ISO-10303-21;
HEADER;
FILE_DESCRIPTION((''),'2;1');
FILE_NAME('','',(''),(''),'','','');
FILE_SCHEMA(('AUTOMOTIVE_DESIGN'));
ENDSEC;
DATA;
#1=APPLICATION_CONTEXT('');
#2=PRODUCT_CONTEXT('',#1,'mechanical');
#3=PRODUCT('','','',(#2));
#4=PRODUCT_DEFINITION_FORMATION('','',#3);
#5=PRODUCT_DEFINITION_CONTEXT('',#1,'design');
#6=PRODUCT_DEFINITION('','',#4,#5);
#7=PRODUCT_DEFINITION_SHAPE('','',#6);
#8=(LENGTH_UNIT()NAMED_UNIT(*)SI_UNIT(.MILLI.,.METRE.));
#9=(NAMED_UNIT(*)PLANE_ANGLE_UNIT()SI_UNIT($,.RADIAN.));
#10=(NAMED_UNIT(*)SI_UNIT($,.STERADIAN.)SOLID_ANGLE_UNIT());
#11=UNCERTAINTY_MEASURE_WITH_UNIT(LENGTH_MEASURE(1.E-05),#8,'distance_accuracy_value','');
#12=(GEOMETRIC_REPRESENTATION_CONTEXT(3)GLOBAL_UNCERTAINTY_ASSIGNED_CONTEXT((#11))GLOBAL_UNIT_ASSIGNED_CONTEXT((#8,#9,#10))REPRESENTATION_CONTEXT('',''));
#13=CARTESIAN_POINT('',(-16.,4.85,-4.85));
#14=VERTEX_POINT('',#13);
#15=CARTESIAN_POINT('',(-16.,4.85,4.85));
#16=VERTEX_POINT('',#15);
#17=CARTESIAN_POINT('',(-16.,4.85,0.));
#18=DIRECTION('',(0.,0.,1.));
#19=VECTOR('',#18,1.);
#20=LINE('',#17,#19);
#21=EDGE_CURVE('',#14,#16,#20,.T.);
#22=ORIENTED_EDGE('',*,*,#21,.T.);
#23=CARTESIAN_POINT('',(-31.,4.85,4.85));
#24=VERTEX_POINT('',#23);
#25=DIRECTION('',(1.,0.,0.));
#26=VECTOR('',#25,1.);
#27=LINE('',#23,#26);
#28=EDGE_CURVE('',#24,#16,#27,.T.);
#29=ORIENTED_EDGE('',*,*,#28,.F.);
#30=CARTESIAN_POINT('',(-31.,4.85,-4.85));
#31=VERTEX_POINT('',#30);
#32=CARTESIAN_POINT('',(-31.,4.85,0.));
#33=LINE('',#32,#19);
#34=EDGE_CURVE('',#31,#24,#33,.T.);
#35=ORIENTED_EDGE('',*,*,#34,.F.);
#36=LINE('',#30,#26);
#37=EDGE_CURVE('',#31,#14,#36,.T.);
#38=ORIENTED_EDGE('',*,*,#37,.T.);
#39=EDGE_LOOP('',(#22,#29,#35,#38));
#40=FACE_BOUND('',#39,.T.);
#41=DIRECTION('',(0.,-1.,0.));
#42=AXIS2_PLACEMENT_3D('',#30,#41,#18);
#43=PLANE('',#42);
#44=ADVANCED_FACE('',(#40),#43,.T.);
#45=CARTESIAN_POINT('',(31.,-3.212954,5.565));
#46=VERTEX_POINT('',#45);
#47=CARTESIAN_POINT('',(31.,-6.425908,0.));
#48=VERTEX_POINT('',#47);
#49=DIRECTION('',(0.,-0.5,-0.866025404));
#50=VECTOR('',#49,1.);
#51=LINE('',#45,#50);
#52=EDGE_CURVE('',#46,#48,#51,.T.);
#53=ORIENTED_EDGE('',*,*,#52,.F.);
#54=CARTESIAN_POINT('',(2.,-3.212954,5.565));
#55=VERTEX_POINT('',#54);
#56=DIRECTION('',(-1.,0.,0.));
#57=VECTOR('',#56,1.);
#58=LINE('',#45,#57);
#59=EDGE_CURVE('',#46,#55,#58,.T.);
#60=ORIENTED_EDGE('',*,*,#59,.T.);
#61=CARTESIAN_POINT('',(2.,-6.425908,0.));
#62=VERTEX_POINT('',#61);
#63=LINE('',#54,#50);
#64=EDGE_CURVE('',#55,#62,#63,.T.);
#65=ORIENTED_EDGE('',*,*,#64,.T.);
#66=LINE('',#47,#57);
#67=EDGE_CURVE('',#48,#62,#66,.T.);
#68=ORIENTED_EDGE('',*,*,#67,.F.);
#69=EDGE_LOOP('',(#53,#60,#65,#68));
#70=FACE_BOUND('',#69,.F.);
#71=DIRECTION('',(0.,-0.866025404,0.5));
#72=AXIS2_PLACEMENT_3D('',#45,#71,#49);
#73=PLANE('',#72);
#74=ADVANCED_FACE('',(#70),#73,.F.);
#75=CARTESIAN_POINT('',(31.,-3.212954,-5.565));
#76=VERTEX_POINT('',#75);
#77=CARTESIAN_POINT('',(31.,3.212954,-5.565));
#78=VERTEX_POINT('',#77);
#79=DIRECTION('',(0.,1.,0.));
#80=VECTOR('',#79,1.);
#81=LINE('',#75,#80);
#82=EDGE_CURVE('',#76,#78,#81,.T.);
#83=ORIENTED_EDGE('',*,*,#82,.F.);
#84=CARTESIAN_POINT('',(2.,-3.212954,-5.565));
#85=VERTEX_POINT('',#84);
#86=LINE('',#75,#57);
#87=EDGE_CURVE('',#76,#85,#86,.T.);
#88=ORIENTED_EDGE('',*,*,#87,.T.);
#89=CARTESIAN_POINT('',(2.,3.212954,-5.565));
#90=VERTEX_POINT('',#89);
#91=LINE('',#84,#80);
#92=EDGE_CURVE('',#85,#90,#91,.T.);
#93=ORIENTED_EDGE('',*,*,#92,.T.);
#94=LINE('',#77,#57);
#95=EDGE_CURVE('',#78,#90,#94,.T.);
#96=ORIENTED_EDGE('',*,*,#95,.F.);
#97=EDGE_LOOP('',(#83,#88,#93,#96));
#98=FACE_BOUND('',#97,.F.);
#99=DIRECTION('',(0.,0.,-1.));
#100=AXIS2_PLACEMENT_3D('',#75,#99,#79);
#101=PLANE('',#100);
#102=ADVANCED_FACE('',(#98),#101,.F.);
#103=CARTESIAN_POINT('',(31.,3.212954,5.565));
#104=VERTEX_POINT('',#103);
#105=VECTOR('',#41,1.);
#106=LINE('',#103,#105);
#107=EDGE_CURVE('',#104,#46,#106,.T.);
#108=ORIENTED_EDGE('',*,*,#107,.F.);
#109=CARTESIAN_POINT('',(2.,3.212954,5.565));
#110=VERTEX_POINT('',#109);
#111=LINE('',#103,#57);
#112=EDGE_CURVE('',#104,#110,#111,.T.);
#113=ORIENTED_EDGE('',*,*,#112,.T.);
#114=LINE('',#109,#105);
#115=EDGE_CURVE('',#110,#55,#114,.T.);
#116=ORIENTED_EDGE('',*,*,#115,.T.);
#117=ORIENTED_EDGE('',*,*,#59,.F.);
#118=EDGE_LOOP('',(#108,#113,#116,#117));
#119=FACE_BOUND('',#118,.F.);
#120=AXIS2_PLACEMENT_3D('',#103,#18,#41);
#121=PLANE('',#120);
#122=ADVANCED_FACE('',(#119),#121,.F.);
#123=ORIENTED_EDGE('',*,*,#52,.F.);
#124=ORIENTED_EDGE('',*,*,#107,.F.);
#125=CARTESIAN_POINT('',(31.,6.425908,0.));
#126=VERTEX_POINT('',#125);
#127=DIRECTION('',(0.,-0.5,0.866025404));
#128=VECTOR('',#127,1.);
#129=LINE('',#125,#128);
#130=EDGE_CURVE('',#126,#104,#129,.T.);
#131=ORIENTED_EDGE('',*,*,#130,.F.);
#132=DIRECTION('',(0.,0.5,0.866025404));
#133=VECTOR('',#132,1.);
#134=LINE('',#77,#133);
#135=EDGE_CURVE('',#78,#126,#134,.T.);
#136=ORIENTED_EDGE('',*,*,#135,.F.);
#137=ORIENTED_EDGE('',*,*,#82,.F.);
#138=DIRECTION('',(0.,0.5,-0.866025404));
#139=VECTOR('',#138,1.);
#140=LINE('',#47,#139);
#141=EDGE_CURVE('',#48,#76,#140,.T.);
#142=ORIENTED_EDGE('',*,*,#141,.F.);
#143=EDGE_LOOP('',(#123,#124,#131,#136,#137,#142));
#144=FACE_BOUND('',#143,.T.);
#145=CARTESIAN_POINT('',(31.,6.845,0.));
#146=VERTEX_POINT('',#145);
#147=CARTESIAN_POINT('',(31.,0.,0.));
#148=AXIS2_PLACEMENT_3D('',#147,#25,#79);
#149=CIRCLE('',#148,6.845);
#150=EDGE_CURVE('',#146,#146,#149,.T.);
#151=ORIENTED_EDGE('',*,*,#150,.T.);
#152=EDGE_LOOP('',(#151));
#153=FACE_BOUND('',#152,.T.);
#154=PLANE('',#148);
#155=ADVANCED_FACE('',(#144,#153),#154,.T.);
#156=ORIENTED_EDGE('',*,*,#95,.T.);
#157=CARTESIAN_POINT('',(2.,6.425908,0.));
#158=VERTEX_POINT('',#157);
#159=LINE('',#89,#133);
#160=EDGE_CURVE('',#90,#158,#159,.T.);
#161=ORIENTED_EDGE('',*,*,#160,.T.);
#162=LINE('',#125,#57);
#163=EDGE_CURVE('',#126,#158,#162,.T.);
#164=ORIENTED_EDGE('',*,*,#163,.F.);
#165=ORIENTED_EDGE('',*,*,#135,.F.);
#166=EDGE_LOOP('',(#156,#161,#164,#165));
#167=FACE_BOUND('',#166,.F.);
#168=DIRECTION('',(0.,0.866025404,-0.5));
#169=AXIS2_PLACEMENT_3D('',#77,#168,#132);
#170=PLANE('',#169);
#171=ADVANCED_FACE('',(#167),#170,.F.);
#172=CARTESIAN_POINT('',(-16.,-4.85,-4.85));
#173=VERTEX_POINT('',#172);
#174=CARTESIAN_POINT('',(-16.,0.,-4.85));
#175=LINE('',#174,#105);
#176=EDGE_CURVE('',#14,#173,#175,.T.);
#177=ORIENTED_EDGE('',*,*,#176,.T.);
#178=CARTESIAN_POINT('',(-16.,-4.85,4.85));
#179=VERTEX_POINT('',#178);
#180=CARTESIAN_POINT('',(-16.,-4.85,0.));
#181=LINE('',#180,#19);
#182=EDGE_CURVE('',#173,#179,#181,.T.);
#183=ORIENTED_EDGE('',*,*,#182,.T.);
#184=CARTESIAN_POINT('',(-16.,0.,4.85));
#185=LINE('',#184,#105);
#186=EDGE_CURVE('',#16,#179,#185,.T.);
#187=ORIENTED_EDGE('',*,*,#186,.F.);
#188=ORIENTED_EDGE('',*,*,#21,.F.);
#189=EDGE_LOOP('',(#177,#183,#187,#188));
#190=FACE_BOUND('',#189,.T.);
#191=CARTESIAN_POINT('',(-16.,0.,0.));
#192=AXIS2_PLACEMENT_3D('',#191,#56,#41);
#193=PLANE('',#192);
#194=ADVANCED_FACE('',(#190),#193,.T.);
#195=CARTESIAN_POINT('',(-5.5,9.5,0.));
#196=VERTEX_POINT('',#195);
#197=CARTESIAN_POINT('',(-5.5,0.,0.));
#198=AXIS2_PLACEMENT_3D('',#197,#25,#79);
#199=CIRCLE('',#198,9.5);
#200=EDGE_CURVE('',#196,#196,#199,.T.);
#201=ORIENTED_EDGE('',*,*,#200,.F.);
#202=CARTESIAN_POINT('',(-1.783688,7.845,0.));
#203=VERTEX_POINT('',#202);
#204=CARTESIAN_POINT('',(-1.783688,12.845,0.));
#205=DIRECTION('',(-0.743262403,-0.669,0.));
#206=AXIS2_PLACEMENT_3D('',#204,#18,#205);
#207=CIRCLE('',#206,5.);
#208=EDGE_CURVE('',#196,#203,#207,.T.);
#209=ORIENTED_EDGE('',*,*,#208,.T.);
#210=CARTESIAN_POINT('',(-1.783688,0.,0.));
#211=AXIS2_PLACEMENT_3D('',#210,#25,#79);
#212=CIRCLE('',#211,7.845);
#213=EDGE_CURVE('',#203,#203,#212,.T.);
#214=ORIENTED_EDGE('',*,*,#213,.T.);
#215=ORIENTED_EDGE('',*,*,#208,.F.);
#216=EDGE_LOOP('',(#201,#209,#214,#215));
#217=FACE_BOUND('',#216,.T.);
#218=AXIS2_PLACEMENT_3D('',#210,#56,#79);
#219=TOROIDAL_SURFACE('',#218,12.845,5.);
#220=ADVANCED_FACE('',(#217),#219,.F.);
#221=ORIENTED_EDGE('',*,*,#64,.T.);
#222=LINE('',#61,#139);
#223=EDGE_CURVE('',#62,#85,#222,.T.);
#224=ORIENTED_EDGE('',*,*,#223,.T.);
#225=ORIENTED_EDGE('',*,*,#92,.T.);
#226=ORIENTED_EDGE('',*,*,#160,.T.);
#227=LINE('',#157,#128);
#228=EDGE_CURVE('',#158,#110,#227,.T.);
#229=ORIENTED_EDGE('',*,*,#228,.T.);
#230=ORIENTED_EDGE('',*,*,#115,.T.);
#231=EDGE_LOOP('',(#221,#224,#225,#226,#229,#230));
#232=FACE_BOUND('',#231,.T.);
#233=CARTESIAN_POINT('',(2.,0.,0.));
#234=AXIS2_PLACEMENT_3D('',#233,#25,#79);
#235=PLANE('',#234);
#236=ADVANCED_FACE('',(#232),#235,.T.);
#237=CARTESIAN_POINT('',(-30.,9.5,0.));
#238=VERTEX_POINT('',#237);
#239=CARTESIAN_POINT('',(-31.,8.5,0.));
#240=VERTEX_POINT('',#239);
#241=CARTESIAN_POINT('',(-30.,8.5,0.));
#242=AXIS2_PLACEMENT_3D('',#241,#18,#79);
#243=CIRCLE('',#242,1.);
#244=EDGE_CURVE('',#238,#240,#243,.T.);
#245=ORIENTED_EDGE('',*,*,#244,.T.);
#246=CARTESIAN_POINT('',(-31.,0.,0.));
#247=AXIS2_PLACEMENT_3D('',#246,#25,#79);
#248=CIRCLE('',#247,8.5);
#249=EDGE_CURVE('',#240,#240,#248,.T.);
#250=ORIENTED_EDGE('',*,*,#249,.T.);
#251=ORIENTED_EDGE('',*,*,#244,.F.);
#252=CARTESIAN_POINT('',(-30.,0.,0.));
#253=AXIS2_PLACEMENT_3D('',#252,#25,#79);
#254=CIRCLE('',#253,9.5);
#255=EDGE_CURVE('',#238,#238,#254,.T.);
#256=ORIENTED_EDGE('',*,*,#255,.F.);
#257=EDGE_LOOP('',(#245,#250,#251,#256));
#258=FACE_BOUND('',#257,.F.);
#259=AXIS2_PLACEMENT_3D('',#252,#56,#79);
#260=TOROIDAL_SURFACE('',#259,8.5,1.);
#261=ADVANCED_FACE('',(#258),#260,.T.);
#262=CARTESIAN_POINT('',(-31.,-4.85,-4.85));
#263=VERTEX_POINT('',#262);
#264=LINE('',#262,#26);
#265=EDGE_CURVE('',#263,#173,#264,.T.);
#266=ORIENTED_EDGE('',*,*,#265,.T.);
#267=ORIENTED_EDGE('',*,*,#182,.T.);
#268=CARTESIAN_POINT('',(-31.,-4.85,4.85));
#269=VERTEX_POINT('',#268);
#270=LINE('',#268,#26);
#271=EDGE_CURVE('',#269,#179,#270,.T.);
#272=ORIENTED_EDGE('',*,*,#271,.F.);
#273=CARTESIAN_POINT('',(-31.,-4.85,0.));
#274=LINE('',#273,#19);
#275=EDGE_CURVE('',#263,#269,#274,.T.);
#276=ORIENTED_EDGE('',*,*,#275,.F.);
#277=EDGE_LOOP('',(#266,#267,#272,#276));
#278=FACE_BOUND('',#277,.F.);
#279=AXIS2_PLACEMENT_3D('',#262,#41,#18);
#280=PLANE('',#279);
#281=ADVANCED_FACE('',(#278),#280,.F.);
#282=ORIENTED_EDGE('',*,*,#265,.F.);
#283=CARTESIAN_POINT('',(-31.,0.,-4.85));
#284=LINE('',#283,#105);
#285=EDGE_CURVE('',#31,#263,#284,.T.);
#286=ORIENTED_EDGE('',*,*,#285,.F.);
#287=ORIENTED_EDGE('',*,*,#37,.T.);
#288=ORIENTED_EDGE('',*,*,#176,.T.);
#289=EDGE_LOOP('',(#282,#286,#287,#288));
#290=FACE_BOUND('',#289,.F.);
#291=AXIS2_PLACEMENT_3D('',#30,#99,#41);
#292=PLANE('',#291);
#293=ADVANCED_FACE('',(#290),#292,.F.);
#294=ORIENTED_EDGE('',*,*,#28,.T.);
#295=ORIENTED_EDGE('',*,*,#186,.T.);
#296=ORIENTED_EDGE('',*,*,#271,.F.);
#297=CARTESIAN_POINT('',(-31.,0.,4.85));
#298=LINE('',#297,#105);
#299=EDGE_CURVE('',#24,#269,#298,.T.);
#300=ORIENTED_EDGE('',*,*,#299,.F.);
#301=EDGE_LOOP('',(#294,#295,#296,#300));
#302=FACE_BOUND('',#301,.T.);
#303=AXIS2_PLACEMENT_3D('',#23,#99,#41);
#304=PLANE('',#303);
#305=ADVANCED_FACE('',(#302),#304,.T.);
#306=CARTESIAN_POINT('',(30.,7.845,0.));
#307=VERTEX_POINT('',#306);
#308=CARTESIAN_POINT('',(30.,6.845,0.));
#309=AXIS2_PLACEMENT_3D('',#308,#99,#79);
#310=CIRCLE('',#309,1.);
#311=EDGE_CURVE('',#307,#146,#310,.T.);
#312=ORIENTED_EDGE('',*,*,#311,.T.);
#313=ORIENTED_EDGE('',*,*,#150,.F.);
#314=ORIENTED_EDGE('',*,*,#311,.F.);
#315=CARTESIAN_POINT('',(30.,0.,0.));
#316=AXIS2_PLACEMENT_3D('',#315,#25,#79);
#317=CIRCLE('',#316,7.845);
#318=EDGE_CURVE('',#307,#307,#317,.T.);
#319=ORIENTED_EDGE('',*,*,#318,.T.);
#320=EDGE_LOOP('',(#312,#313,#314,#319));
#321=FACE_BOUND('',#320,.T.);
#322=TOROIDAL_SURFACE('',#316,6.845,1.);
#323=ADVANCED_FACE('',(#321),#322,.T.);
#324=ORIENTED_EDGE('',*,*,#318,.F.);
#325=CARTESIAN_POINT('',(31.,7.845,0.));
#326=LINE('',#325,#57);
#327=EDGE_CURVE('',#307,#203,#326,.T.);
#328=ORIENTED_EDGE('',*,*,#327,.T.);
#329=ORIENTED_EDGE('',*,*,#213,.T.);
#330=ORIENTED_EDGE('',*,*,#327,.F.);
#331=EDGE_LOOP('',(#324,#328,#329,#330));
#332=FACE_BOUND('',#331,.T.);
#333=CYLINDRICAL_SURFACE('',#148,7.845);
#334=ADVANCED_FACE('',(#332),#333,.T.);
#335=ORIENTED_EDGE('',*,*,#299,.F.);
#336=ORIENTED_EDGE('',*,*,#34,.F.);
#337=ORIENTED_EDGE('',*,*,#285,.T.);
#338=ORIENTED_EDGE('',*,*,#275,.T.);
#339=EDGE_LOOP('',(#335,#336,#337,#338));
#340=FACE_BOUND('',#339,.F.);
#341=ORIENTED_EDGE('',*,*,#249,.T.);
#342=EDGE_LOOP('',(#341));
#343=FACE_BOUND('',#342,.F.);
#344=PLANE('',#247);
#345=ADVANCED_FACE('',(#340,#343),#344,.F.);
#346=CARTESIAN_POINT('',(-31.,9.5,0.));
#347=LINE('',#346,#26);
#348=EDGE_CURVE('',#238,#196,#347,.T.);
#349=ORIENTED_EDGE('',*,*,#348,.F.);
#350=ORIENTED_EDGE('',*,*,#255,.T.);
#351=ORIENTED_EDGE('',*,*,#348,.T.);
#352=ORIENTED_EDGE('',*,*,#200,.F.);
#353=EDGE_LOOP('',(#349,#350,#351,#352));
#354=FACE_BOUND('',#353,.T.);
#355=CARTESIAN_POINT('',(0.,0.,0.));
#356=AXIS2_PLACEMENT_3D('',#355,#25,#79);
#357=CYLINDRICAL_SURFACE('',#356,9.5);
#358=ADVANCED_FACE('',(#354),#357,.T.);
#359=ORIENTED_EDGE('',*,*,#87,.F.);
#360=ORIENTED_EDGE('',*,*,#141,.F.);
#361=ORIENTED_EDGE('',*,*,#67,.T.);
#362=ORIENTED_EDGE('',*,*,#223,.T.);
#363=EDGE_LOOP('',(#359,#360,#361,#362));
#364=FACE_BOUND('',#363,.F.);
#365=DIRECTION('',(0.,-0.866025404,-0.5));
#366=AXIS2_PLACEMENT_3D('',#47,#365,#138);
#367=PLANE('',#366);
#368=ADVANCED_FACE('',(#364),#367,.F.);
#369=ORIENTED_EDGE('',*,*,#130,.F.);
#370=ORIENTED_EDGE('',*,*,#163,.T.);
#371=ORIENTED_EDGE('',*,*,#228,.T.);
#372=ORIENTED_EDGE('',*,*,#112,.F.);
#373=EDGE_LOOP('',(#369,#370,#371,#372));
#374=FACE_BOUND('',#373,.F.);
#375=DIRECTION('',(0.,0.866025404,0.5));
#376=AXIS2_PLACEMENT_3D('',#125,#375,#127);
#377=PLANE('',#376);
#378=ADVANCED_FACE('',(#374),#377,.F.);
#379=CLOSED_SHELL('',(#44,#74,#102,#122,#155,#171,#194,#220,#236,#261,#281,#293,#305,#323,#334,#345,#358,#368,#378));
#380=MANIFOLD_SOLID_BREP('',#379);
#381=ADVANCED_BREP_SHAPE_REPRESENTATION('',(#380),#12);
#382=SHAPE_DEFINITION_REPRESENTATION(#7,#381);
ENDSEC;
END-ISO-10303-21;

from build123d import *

# Parameters (mm, degrees)
F0_R     = 9.5
F1_DEPTH = 31
F2_R     = 9.5
F2_R_2   = 7.845
F3_DEPTH = 36.5
F5_R     = 1
F7_DEPTH = 29
F8_W     = 9.7
F8_H     = 9.7
F9_DEPTH = 15


# Not quite as in the source:
# - a fillet or chamfer that OpenCascade refuses, or shapes differently, is made with other operations: its cross-section is extruded or revolved along the edge and cut away or added


with BuildPart() as f1:
    # F0 (on Right) → F1 (new body, symmetric)
    with BuildSketch(Plane.YZ):
        Circle(F0_R)
    extrude(amount=F1_DEPTH, both=True)

    # F2 (on face) → F3 (cut)
    with BuildSketch(Plane.YZ.offset(31)):
        Circle(F2_R)
        Circle(F2_R_2, mode=Mode.SUBTRACT)
    extrude(amount=-F3_DEPTH, mode=Mode.SUBTRACT)

    # F4: fillet of radius 5 on 1 edges, made by hand

    # F4_s1 → F4_t2 (revolve)
    with BuildSketch(Plane.XY):
        with BuildLine():
            ThreePointArc((-5.5, 9.5), (-3.8177725447, 8.2774514234), (-1.783687984, 7.845))
            Line((-1.783687984, 7.845), (-5.5, 7.845))
            Line((-5.5, 7.845), (-5.5, 9.5))
        make_face()
    revolve(axis=Axis((-5.5, 0, 0), (1, 0, 0)))

    # F5
    f5_edges = [f1.edges().sort_by_distance(p)[0] for p in [
        (31, -7.845, 0),
        (-31, -9.5, 0),
    ]]
    fillet(f5_edges, radius=F5_R)

    # F6 (on face) → F7 (cut)
    with BuildSketch(Plane.YZ.offset(31)):
        Polygon((3.212954248, 5.565), (-3.212954248, 5.565), (-6.4259084961, 0), (-3.212954248, -5.565), (3.212954248, -5.565), (6.4259084961, 0), align=None)
    extrude(amount=-F7_DEPTH, mode=Mode.SUBTRACT)

    # F8 (on face) → F9 (cut)
    with BuildSketch(Plane(origin=(-31, 0, 0), x_dir=(0, -1, 0), z_dir=(-1, 0, 0))):
        Rectangle(F8_W, F8_H)
    extrude(amount=-F9_DEPTH, mode=Mode.SUBTRACT)


solid = f1.part
